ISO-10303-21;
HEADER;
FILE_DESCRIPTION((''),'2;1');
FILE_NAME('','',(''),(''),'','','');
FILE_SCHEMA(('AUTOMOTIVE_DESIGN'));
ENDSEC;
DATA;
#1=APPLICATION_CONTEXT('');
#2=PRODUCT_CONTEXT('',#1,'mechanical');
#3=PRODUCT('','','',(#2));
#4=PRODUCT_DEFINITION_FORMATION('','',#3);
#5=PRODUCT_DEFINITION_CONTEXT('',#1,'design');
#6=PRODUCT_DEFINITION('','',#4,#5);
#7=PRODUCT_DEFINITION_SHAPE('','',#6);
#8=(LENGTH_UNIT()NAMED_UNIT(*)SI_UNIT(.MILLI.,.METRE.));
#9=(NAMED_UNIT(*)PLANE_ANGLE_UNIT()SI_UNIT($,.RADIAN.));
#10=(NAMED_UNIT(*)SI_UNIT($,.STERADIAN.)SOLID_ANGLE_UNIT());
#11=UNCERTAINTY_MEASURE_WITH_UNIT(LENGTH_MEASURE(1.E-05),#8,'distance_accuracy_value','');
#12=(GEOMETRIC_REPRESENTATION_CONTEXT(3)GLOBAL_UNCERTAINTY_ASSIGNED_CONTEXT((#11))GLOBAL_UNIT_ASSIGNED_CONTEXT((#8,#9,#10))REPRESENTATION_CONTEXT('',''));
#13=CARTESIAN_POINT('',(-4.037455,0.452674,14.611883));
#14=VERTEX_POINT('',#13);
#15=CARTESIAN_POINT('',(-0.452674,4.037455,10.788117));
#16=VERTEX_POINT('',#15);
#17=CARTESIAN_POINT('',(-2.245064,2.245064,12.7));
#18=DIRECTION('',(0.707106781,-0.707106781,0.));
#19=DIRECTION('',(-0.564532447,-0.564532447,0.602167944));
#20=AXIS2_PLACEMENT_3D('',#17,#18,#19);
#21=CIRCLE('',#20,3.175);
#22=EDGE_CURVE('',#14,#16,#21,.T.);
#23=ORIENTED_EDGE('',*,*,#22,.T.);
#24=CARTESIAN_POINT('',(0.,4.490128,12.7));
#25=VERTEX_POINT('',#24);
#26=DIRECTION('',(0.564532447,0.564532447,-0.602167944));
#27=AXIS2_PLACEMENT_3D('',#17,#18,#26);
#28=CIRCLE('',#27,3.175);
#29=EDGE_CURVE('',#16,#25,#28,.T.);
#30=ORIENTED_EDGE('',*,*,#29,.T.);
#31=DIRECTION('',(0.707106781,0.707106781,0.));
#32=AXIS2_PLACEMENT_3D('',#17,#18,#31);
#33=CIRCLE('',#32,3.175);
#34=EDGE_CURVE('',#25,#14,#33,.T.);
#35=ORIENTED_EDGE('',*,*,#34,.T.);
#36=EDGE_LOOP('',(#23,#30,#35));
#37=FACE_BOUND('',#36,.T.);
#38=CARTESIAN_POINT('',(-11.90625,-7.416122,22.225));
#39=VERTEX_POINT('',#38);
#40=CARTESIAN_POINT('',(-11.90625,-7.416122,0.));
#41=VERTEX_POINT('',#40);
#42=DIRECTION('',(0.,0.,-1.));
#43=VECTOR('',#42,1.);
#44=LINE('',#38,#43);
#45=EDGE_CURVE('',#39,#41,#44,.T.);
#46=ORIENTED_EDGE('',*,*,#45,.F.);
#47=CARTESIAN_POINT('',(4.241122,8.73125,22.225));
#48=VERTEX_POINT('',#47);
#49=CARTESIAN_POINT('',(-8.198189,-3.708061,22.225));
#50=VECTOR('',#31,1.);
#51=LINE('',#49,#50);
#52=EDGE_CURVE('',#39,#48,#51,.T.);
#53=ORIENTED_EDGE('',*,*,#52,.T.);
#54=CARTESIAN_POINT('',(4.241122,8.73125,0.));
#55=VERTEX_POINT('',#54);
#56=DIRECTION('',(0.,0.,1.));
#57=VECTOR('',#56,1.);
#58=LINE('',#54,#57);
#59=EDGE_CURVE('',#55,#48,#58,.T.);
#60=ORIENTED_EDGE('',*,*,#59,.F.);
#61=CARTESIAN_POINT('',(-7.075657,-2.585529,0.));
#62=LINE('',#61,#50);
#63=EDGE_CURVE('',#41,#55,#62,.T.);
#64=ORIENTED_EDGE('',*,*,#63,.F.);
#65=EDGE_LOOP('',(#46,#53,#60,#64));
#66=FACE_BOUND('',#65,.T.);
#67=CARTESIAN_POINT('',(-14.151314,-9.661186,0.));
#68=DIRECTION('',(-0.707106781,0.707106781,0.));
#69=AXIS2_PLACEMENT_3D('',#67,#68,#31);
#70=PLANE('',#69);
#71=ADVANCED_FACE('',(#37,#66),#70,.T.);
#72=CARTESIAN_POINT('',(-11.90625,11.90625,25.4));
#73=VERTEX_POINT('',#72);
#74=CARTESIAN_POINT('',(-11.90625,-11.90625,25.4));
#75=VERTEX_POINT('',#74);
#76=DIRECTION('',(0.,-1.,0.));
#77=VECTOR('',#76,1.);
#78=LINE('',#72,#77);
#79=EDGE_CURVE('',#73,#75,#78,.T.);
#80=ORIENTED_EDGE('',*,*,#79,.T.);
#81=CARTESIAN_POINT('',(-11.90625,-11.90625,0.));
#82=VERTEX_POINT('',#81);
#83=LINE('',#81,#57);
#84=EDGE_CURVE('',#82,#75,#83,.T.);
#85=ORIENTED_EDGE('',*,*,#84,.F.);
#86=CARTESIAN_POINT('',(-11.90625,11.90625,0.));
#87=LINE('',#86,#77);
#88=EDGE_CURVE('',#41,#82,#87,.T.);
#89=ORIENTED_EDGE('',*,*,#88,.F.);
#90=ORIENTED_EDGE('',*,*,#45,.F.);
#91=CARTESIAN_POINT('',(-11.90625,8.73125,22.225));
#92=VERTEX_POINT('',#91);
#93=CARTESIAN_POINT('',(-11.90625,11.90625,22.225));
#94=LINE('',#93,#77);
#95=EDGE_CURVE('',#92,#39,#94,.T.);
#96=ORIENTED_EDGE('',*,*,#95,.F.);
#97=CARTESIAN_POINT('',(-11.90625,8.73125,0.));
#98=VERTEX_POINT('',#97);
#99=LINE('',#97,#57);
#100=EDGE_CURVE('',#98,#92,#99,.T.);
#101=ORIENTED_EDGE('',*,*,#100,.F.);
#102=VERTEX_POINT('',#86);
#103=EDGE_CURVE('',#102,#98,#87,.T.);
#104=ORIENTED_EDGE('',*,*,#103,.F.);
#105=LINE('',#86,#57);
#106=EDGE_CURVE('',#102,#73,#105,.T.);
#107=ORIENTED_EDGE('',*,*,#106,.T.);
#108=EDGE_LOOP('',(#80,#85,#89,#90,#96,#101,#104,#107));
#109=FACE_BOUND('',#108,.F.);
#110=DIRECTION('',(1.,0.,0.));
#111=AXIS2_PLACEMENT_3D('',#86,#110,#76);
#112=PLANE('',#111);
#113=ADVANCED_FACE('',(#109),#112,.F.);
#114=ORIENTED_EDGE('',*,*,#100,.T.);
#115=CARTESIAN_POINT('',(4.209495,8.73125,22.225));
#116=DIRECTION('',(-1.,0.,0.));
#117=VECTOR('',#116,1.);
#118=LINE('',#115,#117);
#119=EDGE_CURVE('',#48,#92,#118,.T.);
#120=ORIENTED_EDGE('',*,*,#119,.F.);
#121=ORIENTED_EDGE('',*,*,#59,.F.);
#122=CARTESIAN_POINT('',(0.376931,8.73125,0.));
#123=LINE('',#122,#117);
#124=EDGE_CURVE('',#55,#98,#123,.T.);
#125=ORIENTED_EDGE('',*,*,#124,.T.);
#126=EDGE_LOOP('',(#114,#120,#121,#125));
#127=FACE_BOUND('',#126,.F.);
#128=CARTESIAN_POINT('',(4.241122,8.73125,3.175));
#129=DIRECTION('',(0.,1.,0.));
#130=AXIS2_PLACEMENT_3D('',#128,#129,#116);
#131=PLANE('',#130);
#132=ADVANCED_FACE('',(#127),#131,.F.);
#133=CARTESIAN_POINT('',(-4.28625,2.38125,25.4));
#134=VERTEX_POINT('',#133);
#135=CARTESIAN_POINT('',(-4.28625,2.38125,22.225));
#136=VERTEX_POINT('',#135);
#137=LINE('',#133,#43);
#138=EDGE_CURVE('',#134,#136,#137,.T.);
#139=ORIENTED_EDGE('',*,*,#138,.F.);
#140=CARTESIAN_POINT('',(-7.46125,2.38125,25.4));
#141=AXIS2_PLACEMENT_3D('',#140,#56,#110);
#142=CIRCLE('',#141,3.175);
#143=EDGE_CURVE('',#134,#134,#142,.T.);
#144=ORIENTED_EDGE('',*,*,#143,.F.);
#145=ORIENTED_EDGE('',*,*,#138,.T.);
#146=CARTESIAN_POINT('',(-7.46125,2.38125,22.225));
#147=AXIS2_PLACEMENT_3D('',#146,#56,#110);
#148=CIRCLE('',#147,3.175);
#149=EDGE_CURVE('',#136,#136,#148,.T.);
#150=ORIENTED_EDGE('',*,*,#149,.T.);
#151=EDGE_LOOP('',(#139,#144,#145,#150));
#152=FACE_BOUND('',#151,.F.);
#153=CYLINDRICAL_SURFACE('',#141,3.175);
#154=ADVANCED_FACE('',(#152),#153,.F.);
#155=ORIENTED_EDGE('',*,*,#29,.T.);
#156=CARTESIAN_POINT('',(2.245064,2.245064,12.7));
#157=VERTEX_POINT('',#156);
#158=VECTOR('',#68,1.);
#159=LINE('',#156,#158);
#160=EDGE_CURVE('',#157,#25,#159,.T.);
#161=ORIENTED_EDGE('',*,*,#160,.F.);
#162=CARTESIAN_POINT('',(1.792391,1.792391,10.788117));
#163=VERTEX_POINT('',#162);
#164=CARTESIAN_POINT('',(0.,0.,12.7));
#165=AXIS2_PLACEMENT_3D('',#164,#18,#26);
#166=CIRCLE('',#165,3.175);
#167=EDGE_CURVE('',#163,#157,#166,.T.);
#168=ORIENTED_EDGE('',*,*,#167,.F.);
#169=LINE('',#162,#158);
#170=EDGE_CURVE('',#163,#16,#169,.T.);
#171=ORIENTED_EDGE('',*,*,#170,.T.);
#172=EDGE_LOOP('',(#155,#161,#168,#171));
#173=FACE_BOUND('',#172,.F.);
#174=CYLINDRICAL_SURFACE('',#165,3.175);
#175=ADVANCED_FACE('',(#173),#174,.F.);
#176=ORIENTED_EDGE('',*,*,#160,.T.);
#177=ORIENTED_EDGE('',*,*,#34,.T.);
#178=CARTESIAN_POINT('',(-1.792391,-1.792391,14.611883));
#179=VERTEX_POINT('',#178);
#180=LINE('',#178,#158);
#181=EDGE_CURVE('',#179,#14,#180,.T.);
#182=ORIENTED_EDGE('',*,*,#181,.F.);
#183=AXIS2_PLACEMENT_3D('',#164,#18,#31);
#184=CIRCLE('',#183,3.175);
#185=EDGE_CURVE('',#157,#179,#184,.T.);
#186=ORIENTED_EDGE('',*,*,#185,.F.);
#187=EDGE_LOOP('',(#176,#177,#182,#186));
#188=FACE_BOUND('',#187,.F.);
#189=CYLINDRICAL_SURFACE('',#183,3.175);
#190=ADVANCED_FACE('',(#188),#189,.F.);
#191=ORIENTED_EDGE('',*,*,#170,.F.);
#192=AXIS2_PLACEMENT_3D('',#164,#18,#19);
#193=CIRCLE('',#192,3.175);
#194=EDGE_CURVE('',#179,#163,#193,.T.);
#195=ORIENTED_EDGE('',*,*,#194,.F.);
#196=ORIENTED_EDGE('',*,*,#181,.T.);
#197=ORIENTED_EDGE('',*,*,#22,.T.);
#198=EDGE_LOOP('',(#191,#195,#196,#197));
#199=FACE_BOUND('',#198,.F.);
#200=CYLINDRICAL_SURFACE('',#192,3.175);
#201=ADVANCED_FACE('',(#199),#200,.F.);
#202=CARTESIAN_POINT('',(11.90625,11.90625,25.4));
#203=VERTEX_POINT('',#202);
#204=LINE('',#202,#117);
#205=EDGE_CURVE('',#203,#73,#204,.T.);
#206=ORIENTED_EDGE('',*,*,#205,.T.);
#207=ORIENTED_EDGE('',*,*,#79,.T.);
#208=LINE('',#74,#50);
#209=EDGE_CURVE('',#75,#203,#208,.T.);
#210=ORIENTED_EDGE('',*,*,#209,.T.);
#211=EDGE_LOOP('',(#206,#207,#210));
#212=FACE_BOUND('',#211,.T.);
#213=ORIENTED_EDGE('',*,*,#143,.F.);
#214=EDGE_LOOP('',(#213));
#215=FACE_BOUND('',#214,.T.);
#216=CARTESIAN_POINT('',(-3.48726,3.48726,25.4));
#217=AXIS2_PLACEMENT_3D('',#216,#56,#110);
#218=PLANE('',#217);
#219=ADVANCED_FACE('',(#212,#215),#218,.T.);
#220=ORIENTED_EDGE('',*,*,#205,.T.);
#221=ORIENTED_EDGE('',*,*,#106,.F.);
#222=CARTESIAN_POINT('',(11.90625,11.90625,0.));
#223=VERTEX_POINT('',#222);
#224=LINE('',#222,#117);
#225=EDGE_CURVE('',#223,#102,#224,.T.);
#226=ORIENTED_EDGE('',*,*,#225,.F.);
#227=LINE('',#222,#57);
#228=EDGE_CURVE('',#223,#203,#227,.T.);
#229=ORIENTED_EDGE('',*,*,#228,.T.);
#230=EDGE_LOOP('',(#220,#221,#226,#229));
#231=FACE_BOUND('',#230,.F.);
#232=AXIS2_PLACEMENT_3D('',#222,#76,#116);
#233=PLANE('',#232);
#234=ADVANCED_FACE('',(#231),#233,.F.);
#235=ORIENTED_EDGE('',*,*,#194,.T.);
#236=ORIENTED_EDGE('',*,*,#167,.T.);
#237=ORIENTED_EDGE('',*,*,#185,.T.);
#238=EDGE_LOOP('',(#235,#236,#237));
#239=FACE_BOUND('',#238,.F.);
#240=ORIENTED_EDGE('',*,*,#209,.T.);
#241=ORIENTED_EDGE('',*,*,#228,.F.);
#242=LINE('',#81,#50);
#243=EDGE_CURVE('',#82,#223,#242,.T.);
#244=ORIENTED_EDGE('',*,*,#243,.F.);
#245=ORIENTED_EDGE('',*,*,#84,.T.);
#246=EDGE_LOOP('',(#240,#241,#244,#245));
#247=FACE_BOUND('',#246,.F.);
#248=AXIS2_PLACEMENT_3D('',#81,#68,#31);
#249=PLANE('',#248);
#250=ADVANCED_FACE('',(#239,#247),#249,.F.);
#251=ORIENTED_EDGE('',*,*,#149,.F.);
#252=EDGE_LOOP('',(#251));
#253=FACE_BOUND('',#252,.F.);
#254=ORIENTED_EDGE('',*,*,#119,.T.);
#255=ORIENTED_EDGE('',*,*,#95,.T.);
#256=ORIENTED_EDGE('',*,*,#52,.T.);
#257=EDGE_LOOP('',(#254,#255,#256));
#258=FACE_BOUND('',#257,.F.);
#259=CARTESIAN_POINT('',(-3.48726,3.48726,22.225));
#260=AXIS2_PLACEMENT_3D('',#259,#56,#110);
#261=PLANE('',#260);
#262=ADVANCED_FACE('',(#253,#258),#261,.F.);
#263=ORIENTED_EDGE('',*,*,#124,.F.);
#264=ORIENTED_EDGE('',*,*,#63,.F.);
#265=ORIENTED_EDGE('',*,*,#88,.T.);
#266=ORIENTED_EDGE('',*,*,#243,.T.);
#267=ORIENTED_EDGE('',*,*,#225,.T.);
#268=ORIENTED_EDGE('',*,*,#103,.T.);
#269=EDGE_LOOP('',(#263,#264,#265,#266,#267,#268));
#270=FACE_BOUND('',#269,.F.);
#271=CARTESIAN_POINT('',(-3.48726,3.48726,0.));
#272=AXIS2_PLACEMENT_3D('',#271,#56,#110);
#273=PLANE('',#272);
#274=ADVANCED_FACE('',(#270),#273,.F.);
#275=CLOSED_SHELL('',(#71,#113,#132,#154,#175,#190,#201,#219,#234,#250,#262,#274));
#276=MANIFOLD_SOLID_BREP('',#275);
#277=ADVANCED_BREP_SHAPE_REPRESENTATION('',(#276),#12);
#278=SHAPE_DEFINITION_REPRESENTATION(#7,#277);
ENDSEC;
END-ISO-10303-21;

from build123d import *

# Parameters (mm, degrees)
F1_DEPTH = 25.4
F2_T     = -3.175
F3_DEPTH = 25.4
F5_DEPTH = 3.175
F6_R     = 3.175
F7_DEPTH = 25.4
F9_DEPTH = 3.175


# Not quite as in the source:
# - a feature names something its author has since deleted; it is built from what else it names


with BuildPart() as f1:
    # F0 (on Top) → F1 (new body)
    with BuildSketch(Plane.XY):
        Polygon((11.90625, 11.90625), (-11.90625, 11.90625), (-11.90625, -11.90625), align=None)
    extrude(amount=F1_DEPTH)

    # F2
    f2_openings = [f1.faces().sort_by_distance(p)[0] for p in [
        (-11.90625, 0, 12.7),
    ]]
    offset(amount=F2_T, openings=f2_openings)

    # F3 (cut): a face of the model
    f3_faces = [f1.faces().sort_by_distance(p)[0] for p in [
        (-6.5237926868, 3.3487926868, 3.175),
    ]]
    extrude(f3_faces, amount=-F3_DEPTH, mode=Mode.SUBTRACT)

    # F4 (on face) → F5 (cut)
    with BuildSketch(Plane(origin=(-11.90625, 0, 0), x_dir=(0, -1, 0), z_dir=(-1, 0, 0))):
        with BuildLine():
            ThreePointArc((3.175, 12.7), (2.9133467904, 13.962155093), (2.1715130842, 15.0162806231))
            Line((2.1715130842, 15.0162806231), (0, 12.7))
            Line((0, 12.7), (2.1715130842, 10.3837193769))
            ThreePointArc((2.1715130842, 10.3837193769), (2.9133467904, 11.437844907), (3.175, 12.7))
        make_face()
        with BuildLine():
            Line((0, 12.7), (2.1715130842, 15.0162806231))
            ThreePointArc((2.1715130842, 15.0162806231), (0, 15.875), (-2.1715130842, 15.0162806231))
            Line((-2.1715130842, 15.0162806231), (0, 12.7))
        make_face()
        with BuildLine():
            Line((-2.1715130842, 10.3837193769), (0, 12.7))
            Line((0, 12.7), (-2.1715130842, 15.0162806231))
            ThreePointArc((-2.1715130842, 15.0162806231), (-3.175, 12.7), (-2.1715130842, 10.3837193769))
        make_face()
        with BuildLine():
            Line((2.1715130842, 10.3837193769), (0, 12.7))
            Line((0, 12.7), (-2.1715130842, 10.3837193769))
            ThreePointArc((-2.1715130842, 10.3837193769), (0, 9.525), (2.1715130842, 10.3837193769))
        make_face()
    extrude(amount=-F5_DEPTH, mode=Mode.SUBTRACT)

    # F6 (on face) → F7 (cut)
    with BuildSketch(Plane.XY.offset(25.4)):
        with Locations((-7.46125, 2.38125)):
            Circle(F6_R)
    extrude(amount=-F7_DEPTH, mode=Mode.SUBTRACT)

    # F8 (on face) → F9 (cut)
    with BuildSketch(Plane(origin=(0, 0, 0), x_dir=(0.7071067812, 0.7071067812, 0), z_dir=(0.7071067812, -0.7071067812, 0))):
        with BuildLine():
            ThreePointArc((3.175, 12.7), (1.0081076412, 15.7107048982), (-2.5348229819, 14.6118832209))
            Line((-2.5348229819, 14.6118832209), (2.5348229819, 10.7881167791))
            ThreePointArc((2.5348229819, 10.7881167791), (3.0107048982, 11.6918923588), (3.175, 12.7))
        make_face()
        with BuildLine():
            Line((2.5348229819, 10.7881167791), (-2.5348229819, 14.6118832209))
            ThreePointArc((-2.5348229819, 14.6118832209), (-1.9118832209, 10.1651770181), (2.5348229819, 10.7881167791))
        make_face()
    extrude(amount=-F9_DEPTH, mode=Mode.SUBTRACT)


solid = f1.part
